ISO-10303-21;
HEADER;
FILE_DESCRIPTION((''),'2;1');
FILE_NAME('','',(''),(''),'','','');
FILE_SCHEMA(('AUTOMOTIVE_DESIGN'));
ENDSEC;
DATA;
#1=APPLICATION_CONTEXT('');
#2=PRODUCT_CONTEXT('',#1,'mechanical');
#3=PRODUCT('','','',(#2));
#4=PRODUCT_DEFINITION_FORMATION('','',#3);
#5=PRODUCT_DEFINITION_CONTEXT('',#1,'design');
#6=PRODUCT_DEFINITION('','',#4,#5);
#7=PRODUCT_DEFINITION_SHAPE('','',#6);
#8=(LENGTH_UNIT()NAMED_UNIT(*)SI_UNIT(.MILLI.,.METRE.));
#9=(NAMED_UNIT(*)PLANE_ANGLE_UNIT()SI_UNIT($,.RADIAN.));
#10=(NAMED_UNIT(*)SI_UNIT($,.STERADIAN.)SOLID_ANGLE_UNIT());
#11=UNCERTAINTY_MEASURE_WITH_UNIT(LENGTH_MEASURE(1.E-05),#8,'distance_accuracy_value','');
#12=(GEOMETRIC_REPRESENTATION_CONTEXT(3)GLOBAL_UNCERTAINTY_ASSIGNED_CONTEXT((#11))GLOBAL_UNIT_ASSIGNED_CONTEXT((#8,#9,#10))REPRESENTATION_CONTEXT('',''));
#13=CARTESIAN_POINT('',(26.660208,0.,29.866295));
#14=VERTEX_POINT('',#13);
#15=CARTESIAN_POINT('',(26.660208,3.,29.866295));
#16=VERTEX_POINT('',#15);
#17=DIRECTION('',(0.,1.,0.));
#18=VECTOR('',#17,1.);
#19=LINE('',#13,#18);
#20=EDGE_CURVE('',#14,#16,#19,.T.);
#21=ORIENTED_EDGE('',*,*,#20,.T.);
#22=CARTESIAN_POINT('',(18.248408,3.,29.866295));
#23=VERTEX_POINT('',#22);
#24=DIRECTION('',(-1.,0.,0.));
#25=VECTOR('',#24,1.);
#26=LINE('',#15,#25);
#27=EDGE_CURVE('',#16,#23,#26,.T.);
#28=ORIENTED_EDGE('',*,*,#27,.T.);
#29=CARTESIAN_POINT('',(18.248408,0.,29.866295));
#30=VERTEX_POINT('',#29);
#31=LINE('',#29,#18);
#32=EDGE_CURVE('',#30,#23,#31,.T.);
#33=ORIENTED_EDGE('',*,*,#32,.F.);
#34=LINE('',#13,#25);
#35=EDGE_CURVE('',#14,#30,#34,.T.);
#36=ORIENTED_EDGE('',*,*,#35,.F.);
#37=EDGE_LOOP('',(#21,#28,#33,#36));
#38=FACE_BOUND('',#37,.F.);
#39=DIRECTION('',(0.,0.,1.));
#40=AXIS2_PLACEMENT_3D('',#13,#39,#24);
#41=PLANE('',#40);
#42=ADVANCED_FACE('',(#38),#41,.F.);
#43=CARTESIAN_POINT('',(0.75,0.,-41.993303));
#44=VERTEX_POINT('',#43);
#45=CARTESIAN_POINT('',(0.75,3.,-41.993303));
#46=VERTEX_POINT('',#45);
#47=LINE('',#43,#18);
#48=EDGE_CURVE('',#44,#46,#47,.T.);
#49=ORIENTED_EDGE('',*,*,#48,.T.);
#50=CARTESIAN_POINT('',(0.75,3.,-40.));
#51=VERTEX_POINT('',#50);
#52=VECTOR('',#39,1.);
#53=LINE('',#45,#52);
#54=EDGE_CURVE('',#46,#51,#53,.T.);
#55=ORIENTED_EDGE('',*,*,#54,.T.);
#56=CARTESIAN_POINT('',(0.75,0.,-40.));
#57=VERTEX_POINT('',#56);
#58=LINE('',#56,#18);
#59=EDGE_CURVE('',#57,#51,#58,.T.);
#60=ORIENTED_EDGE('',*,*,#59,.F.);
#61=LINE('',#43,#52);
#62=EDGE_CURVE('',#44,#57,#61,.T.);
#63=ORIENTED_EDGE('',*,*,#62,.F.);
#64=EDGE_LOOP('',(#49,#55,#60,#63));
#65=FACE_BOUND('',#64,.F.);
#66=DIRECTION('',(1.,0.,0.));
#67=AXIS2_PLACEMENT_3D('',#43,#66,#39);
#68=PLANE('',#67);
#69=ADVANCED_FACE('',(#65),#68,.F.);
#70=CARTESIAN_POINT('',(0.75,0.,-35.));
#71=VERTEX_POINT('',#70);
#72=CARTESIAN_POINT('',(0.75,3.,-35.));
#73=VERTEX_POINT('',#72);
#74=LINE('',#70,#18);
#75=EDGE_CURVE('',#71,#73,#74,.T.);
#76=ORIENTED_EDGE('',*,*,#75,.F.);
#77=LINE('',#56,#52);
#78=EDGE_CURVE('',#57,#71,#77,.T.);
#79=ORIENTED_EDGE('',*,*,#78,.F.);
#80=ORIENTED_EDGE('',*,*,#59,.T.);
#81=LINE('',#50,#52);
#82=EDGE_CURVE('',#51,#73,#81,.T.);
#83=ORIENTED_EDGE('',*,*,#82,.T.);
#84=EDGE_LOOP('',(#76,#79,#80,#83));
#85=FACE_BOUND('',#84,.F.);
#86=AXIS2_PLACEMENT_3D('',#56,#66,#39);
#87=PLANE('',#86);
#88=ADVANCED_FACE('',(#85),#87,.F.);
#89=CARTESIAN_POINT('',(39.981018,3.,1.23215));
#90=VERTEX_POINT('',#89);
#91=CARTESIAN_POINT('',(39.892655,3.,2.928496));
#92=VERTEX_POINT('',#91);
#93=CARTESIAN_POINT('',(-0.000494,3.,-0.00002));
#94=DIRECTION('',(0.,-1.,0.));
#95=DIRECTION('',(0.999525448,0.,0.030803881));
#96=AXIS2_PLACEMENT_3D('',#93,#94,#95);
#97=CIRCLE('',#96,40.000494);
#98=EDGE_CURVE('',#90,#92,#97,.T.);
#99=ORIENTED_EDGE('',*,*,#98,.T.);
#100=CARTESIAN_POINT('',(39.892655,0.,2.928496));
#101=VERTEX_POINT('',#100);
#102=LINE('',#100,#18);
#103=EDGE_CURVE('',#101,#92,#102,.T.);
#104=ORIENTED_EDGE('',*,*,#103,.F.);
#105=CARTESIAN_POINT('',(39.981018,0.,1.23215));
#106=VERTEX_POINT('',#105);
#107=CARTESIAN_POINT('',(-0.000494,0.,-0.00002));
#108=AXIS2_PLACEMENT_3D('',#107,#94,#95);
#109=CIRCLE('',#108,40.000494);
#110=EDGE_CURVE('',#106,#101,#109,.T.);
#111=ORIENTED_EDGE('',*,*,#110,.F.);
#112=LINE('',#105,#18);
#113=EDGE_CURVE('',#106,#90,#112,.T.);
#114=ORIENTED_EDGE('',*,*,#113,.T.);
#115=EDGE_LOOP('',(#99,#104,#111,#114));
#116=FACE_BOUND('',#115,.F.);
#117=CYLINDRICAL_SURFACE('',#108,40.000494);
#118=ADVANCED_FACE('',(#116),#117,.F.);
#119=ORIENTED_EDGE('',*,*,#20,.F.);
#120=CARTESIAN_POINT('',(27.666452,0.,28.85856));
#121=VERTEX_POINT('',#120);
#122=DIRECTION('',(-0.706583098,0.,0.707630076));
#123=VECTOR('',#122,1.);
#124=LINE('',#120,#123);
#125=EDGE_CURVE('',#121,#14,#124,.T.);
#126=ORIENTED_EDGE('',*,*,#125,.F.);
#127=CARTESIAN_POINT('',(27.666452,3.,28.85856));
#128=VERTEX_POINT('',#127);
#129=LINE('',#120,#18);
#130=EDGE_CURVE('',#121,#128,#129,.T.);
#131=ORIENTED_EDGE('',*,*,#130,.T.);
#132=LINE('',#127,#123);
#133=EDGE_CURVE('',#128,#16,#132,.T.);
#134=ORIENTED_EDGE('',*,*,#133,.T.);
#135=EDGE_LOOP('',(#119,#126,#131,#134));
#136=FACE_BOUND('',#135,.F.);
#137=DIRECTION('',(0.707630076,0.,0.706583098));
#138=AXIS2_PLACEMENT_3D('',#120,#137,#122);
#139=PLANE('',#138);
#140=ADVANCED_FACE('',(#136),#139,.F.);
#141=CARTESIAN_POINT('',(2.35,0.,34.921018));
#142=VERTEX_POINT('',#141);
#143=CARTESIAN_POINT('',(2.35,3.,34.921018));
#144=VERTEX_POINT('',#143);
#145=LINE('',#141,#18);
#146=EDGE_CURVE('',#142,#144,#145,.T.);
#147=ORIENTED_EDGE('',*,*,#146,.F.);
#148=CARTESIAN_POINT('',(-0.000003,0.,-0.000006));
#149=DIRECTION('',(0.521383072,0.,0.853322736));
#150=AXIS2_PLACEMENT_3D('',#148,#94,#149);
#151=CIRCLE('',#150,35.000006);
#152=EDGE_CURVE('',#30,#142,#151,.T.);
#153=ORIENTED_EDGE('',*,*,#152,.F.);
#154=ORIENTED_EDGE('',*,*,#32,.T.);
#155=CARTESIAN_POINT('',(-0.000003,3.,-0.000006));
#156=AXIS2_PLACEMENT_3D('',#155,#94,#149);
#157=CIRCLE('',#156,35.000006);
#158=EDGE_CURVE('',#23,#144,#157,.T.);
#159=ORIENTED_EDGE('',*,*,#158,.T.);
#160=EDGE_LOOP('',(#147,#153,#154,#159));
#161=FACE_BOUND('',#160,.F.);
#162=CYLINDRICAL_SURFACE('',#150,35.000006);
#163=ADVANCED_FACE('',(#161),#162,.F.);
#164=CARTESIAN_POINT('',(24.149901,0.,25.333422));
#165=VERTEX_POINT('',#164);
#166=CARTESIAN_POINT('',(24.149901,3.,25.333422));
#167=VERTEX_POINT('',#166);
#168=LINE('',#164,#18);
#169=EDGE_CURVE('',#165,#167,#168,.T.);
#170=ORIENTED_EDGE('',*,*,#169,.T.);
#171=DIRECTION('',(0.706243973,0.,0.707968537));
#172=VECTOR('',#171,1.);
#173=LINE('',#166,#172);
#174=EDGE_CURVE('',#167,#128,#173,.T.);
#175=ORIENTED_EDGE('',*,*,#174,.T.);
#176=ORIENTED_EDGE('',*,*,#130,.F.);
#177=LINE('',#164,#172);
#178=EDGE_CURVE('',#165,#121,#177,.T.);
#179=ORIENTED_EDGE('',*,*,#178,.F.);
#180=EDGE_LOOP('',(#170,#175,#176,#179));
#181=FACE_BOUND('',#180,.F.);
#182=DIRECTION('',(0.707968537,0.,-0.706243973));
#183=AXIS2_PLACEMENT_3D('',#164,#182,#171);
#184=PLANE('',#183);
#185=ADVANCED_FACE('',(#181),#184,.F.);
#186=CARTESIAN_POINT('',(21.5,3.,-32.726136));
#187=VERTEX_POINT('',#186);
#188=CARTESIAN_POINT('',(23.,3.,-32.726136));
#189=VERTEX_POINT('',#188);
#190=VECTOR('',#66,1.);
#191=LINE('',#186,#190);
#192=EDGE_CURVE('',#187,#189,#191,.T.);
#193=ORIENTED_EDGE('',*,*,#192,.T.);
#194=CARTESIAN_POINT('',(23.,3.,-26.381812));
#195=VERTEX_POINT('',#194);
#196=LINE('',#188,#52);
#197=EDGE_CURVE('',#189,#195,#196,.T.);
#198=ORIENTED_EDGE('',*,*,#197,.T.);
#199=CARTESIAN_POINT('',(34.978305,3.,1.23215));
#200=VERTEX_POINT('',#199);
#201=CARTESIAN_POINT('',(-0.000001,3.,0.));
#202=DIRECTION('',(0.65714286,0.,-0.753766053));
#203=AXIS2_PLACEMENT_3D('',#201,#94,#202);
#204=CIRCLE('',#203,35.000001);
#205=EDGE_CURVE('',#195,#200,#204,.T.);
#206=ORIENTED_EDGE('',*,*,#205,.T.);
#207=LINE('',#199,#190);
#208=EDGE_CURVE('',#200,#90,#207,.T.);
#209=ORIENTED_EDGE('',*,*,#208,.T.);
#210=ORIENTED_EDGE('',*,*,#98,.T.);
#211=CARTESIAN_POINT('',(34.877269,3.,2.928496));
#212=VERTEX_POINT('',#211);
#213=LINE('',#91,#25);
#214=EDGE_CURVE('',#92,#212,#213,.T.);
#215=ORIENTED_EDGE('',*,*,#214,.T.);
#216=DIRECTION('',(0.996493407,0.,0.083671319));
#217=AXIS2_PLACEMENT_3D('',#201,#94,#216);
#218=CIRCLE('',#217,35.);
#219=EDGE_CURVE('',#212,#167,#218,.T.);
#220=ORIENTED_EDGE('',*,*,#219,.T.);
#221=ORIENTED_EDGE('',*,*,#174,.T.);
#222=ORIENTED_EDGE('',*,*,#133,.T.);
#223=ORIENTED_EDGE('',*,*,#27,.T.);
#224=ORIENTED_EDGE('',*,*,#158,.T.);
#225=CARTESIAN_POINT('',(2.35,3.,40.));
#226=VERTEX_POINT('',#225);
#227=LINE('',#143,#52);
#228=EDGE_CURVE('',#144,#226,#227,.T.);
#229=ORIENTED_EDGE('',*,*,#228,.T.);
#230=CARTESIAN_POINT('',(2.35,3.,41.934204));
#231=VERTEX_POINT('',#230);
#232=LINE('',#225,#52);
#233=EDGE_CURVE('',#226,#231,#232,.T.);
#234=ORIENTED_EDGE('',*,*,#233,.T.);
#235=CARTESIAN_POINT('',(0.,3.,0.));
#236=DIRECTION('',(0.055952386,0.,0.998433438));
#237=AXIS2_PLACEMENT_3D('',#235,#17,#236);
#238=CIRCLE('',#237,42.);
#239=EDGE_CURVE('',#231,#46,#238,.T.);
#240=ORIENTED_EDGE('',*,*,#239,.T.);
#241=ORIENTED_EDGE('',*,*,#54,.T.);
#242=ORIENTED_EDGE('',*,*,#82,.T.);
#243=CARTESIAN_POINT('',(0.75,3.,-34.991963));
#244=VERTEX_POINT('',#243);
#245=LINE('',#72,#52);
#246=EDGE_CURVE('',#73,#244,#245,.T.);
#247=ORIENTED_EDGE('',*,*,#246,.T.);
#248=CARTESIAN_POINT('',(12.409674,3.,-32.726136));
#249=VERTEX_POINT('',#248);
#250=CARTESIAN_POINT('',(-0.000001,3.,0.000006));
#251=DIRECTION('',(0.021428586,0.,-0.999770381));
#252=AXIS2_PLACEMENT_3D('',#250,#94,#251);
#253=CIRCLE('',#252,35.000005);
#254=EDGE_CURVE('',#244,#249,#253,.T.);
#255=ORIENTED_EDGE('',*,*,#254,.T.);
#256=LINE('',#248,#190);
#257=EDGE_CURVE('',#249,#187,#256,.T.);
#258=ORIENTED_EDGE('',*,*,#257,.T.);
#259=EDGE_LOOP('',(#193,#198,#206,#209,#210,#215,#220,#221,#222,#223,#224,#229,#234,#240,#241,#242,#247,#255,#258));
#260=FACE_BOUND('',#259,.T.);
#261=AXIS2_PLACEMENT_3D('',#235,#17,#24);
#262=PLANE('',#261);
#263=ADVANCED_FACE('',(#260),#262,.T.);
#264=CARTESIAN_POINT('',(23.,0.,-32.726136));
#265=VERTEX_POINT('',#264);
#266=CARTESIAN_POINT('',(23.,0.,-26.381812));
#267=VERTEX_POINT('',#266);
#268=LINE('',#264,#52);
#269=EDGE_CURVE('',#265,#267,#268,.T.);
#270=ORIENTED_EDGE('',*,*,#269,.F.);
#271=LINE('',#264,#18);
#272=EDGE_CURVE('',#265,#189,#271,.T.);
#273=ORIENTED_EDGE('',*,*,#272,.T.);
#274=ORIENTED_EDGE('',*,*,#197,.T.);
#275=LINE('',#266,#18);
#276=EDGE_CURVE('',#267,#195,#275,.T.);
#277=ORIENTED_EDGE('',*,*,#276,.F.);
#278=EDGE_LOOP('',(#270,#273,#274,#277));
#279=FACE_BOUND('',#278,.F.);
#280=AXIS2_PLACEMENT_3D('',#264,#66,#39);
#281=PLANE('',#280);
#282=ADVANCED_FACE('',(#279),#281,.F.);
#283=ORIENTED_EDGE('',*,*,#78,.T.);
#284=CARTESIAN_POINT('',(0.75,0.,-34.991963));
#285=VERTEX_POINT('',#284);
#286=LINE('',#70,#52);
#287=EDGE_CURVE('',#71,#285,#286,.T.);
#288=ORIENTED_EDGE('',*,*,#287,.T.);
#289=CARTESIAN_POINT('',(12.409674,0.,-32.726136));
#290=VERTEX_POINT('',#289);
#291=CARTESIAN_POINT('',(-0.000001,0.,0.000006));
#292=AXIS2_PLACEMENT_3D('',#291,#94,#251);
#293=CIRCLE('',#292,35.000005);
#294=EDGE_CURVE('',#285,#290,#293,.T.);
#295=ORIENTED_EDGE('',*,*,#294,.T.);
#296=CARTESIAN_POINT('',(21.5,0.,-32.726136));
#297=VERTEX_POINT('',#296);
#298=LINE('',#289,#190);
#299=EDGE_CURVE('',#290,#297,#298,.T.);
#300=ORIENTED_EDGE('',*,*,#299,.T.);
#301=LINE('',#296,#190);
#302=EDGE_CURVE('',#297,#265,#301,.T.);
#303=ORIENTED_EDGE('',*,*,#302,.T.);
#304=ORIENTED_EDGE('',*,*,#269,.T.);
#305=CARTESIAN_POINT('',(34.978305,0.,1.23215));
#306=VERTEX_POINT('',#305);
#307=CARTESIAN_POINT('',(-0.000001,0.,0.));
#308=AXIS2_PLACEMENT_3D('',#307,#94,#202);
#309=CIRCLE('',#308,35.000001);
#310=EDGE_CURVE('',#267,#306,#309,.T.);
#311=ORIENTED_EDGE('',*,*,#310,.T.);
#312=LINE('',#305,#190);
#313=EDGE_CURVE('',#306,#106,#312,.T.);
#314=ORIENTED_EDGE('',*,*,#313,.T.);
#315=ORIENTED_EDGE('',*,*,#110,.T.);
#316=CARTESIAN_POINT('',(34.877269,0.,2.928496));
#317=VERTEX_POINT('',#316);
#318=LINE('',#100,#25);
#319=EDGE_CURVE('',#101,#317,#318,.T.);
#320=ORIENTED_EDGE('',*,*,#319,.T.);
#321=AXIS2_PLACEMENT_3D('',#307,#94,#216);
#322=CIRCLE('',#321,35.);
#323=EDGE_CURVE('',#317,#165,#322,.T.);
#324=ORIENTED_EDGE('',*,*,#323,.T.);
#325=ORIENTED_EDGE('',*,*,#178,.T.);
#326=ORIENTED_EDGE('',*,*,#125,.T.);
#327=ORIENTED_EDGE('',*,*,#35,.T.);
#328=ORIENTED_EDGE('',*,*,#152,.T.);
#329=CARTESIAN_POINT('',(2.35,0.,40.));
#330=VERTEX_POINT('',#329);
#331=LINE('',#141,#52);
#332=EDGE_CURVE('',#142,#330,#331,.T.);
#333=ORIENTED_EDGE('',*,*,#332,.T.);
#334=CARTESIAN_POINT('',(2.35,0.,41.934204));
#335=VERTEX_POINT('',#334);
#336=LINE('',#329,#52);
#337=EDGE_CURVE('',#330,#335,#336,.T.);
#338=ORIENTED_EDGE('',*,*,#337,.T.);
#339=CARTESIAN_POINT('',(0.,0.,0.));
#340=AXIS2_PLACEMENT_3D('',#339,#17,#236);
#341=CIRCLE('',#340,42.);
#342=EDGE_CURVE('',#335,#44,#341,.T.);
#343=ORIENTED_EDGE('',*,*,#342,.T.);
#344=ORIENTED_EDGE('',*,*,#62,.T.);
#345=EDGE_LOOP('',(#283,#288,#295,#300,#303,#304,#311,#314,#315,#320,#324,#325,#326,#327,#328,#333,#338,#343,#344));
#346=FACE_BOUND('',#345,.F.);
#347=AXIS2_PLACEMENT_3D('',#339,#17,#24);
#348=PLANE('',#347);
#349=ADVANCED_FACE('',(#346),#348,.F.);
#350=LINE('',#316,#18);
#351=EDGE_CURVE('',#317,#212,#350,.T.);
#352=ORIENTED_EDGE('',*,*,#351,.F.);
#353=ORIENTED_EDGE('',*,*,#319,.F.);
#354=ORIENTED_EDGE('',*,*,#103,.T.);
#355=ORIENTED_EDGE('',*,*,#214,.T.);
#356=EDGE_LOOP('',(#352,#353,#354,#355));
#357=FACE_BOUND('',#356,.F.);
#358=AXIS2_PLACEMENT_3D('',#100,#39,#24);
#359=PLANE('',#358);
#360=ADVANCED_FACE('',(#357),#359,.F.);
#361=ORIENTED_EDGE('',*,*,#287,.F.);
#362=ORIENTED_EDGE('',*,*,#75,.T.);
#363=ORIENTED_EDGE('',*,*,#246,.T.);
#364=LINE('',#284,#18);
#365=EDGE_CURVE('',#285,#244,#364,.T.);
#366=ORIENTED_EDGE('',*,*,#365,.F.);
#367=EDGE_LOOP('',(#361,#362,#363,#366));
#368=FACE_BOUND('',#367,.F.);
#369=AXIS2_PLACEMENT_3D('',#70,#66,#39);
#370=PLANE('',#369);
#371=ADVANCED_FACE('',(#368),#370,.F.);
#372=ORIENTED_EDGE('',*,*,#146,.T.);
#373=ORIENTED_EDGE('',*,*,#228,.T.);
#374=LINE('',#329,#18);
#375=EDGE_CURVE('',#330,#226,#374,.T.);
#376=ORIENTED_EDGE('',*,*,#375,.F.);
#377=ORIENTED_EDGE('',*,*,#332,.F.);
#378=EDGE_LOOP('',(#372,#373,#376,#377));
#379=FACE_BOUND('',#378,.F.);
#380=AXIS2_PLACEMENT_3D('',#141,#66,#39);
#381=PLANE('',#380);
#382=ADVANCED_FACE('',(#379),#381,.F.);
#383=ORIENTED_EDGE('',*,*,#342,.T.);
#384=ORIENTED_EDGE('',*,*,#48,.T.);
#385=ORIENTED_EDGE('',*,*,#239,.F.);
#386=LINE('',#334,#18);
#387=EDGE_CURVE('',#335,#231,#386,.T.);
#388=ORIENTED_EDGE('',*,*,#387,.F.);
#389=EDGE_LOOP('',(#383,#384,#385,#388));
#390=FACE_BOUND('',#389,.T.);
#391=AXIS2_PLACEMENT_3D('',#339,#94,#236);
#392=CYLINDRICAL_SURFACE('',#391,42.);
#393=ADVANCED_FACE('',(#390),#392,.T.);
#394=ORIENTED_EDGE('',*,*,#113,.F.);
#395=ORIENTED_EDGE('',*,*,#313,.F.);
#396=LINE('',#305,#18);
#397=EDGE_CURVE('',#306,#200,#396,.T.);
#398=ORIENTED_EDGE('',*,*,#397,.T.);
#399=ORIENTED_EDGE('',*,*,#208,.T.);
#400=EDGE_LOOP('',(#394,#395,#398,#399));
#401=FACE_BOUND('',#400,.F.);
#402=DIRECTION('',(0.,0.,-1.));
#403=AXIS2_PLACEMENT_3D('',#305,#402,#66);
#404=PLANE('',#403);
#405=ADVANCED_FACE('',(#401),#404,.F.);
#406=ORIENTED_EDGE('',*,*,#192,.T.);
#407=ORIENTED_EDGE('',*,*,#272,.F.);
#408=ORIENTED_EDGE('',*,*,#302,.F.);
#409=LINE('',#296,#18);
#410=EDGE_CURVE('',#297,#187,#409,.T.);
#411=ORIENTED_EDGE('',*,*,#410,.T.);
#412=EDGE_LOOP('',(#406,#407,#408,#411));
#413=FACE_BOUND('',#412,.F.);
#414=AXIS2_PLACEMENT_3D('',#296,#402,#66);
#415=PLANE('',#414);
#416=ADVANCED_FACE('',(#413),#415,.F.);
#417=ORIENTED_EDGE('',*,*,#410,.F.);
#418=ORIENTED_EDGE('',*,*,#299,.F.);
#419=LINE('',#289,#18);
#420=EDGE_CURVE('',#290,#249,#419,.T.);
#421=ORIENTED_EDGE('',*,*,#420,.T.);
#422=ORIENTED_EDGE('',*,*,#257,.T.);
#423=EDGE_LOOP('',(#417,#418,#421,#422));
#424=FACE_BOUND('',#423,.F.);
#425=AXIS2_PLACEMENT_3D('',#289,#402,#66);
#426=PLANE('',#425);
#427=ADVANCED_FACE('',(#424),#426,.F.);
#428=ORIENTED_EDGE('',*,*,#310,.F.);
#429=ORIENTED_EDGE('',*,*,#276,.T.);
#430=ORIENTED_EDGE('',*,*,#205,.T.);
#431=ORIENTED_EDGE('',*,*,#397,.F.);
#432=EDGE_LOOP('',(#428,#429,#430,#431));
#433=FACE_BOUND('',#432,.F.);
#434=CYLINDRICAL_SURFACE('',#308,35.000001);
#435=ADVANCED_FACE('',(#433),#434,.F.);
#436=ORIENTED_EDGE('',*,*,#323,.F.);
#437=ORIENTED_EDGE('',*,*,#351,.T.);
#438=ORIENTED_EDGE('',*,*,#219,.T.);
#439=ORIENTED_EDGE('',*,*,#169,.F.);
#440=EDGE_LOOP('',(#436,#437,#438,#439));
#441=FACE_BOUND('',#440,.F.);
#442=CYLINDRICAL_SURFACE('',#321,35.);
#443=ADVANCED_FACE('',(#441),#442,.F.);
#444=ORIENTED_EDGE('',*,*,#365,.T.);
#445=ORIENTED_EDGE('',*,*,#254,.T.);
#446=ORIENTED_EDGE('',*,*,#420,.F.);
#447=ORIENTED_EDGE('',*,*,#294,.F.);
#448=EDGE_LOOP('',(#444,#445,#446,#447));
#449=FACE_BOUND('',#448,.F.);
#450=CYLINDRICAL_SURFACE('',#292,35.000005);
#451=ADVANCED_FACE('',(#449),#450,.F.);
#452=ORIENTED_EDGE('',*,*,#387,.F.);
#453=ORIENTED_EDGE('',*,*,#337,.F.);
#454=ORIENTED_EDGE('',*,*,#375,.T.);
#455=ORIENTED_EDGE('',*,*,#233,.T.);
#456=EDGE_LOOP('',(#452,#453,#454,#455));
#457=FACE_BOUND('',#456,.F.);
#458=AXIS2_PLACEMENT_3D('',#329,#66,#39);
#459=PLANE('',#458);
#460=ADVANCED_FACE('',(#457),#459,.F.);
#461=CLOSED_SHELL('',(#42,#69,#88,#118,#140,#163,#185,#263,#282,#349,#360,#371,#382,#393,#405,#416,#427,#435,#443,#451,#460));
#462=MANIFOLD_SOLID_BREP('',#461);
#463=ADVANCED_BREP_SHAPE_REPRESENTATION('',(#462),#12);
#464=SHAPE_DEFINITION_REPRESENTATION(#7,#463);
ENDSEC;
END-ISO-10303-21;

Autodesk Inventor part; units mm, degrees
ref_plane "YZ Plane" through (0, 0, 0) normal (1, 0, 0) x (0, 1, 0)
ref_plane "XZ Plane" through (0, 0, 0) normal (0, 1, 0) x (-1, 0, 0)
ref_plane "XY Plane" through (0, 0, 0) normal (0, 0, 1) x (1, 0, 0)
sketch "Sketch1" plane through (0, 0, 0) normal (0, 1, 0) x (-1, 0, 0)
  circle A0 centre (0, 0) radius 40
  circle A1 centre (0, 0) radius 35
  line L0 (-0.75, -40) -> (-0.75, -35)
  line L1 (-23, -26.381812) -> (-23, -32.726136)
  line L2 (-34.93812, 2.828496) -> (-39.945867, 2.828496)
  line L3 (-39.945867, 1.33215) -> (-34.93812, 1.33215)
  line L4 (-24.132224, 25.315702) -> (-27.666452, 28.85856)
  line L5 (-26.660208, 29.866295) -> (-27.720868, 28.808219)
  line L6 (-39.940266, 2.933386) -> (-39.940266, 1.43704)
  line L7 (-23, -32.726136) -> (-21.5, -32.726136)
  circle A2 centre (0, 0) radius 42
  line L8 (-2.35, 40) -> (-2.35, 32.985933)
  line L9 (-27.666452, 28.85856) -> (-27.668423, 28.860536)
  line L10 (-26.660208, 29.866295) -> (-18.248408, 29.866295)
  line L11 (-21.5, -32.726136) -> (-12.409674, -32.726136)
  line L12 (-0.75, -35) -> (-0.75, -34.991963)
  line L13 (-34.93812, 2.828496) -> (-34.885522, 2.828496)
  line L14 (-39.945867, 1.33215) -> (-39.977811, 1.33215)
  line L15 (-39.940266, 1.43704) -> (-39.940266, 1.33215)
  line L16 (-0.75, -40) -> (-0.75, -41.993303)
  line L17 (-2.35, 40) -> (-2.35, 41.934204)
  line L18 (-39.892655, 2.928496) -> (-34.877269, 2.928496)
  line L19 (-34.978305, 1.23215) -> (-39.981018, 1.23215)
  line L20 (-39.892655, 2.928496) -> (-39.940266, 2.933386)
  point P0 (-24.149901, 25.333422)
  point P1 (-2.35, 34.921018)
  point P2 (-2.35, 39.930909)
  point P3 (-0.75, -39.992968)
  point P4 (-34.974639, 1.33215)
  point P5 (-39.89987, 2.828496)
  dimension "d0" = 2
  dimension "d3" = 0.1
  dimension "d4" = 0.1
sketch "Sketch1 outline for Extrusion1" plane through (0, 0, 0) normal (0, 1, 0) x (-1, 0, 0)
  line L0 (-27.666452, 28.85856) -> (-26.660208, 29.866295)
  line L1 (-24.149901, 25.333422) -> (-27.666452, 28.85856)
  arc A0 (-34.877269, 2.928496) -> (-24.149901, 25.333422) centre (0, 0) cw
  line L2 (-39.892655, 2.928496) -> (-34.877269, 2.928496)
  arc A1 (-39.981018, 1.23215) -> (-39.892655, 2.928496) centre (0, 0) cw
  line L3 (-34.978305, 1.23215) -> (-39.981018, 1.23215)
  arc A2 (-23, -26.381812) -> (-34.978305, 1.23215) centre (0, 0) cw
  line L4 (-23, -32.726136) -> (-23, -26.381812)
  line L5 (-21.5, -32.726136) -> (-23, -32.726136)
  line L6 (-12.409674, -32.726136) -> (-21.5, -32.726136)
  arc A3 (-0.75, -34.991963) -> (-12.409674, -32.726136) centre (0, 0) cw
  line L7 (-0.75, -35) -> (-0.75, -34.991963)
  line L8 (-0.75, -40) -> (-0.75, -35)
  line L9 (-0.75, -41.993303) -> (-0.75, -40)
  arc A4 (-2.35, 41.934204) -> (-0.75, -41.993303) centre (0, 0) ccw
  line L10 (-2.35, 40) -> (-2.35, 41.934204)
  line L11 (-2.35, 34.921018) -> (-2.35, 40)
  arc A5 (-18.248408, 29.866295) -> (-2.35, 34.921018) centre (0, 0) cw
  line L12 (-26.660208, 29.866295) -> (-18.248408, 29.866295)
extrude "Extrusion1" add sketch "Sketch1 outline for Extrusion1" along normal blind 3
equation "\"d4\" = slack"
equation "\"slack\" = 0.1"
properties part number "Back_front_aligner"
